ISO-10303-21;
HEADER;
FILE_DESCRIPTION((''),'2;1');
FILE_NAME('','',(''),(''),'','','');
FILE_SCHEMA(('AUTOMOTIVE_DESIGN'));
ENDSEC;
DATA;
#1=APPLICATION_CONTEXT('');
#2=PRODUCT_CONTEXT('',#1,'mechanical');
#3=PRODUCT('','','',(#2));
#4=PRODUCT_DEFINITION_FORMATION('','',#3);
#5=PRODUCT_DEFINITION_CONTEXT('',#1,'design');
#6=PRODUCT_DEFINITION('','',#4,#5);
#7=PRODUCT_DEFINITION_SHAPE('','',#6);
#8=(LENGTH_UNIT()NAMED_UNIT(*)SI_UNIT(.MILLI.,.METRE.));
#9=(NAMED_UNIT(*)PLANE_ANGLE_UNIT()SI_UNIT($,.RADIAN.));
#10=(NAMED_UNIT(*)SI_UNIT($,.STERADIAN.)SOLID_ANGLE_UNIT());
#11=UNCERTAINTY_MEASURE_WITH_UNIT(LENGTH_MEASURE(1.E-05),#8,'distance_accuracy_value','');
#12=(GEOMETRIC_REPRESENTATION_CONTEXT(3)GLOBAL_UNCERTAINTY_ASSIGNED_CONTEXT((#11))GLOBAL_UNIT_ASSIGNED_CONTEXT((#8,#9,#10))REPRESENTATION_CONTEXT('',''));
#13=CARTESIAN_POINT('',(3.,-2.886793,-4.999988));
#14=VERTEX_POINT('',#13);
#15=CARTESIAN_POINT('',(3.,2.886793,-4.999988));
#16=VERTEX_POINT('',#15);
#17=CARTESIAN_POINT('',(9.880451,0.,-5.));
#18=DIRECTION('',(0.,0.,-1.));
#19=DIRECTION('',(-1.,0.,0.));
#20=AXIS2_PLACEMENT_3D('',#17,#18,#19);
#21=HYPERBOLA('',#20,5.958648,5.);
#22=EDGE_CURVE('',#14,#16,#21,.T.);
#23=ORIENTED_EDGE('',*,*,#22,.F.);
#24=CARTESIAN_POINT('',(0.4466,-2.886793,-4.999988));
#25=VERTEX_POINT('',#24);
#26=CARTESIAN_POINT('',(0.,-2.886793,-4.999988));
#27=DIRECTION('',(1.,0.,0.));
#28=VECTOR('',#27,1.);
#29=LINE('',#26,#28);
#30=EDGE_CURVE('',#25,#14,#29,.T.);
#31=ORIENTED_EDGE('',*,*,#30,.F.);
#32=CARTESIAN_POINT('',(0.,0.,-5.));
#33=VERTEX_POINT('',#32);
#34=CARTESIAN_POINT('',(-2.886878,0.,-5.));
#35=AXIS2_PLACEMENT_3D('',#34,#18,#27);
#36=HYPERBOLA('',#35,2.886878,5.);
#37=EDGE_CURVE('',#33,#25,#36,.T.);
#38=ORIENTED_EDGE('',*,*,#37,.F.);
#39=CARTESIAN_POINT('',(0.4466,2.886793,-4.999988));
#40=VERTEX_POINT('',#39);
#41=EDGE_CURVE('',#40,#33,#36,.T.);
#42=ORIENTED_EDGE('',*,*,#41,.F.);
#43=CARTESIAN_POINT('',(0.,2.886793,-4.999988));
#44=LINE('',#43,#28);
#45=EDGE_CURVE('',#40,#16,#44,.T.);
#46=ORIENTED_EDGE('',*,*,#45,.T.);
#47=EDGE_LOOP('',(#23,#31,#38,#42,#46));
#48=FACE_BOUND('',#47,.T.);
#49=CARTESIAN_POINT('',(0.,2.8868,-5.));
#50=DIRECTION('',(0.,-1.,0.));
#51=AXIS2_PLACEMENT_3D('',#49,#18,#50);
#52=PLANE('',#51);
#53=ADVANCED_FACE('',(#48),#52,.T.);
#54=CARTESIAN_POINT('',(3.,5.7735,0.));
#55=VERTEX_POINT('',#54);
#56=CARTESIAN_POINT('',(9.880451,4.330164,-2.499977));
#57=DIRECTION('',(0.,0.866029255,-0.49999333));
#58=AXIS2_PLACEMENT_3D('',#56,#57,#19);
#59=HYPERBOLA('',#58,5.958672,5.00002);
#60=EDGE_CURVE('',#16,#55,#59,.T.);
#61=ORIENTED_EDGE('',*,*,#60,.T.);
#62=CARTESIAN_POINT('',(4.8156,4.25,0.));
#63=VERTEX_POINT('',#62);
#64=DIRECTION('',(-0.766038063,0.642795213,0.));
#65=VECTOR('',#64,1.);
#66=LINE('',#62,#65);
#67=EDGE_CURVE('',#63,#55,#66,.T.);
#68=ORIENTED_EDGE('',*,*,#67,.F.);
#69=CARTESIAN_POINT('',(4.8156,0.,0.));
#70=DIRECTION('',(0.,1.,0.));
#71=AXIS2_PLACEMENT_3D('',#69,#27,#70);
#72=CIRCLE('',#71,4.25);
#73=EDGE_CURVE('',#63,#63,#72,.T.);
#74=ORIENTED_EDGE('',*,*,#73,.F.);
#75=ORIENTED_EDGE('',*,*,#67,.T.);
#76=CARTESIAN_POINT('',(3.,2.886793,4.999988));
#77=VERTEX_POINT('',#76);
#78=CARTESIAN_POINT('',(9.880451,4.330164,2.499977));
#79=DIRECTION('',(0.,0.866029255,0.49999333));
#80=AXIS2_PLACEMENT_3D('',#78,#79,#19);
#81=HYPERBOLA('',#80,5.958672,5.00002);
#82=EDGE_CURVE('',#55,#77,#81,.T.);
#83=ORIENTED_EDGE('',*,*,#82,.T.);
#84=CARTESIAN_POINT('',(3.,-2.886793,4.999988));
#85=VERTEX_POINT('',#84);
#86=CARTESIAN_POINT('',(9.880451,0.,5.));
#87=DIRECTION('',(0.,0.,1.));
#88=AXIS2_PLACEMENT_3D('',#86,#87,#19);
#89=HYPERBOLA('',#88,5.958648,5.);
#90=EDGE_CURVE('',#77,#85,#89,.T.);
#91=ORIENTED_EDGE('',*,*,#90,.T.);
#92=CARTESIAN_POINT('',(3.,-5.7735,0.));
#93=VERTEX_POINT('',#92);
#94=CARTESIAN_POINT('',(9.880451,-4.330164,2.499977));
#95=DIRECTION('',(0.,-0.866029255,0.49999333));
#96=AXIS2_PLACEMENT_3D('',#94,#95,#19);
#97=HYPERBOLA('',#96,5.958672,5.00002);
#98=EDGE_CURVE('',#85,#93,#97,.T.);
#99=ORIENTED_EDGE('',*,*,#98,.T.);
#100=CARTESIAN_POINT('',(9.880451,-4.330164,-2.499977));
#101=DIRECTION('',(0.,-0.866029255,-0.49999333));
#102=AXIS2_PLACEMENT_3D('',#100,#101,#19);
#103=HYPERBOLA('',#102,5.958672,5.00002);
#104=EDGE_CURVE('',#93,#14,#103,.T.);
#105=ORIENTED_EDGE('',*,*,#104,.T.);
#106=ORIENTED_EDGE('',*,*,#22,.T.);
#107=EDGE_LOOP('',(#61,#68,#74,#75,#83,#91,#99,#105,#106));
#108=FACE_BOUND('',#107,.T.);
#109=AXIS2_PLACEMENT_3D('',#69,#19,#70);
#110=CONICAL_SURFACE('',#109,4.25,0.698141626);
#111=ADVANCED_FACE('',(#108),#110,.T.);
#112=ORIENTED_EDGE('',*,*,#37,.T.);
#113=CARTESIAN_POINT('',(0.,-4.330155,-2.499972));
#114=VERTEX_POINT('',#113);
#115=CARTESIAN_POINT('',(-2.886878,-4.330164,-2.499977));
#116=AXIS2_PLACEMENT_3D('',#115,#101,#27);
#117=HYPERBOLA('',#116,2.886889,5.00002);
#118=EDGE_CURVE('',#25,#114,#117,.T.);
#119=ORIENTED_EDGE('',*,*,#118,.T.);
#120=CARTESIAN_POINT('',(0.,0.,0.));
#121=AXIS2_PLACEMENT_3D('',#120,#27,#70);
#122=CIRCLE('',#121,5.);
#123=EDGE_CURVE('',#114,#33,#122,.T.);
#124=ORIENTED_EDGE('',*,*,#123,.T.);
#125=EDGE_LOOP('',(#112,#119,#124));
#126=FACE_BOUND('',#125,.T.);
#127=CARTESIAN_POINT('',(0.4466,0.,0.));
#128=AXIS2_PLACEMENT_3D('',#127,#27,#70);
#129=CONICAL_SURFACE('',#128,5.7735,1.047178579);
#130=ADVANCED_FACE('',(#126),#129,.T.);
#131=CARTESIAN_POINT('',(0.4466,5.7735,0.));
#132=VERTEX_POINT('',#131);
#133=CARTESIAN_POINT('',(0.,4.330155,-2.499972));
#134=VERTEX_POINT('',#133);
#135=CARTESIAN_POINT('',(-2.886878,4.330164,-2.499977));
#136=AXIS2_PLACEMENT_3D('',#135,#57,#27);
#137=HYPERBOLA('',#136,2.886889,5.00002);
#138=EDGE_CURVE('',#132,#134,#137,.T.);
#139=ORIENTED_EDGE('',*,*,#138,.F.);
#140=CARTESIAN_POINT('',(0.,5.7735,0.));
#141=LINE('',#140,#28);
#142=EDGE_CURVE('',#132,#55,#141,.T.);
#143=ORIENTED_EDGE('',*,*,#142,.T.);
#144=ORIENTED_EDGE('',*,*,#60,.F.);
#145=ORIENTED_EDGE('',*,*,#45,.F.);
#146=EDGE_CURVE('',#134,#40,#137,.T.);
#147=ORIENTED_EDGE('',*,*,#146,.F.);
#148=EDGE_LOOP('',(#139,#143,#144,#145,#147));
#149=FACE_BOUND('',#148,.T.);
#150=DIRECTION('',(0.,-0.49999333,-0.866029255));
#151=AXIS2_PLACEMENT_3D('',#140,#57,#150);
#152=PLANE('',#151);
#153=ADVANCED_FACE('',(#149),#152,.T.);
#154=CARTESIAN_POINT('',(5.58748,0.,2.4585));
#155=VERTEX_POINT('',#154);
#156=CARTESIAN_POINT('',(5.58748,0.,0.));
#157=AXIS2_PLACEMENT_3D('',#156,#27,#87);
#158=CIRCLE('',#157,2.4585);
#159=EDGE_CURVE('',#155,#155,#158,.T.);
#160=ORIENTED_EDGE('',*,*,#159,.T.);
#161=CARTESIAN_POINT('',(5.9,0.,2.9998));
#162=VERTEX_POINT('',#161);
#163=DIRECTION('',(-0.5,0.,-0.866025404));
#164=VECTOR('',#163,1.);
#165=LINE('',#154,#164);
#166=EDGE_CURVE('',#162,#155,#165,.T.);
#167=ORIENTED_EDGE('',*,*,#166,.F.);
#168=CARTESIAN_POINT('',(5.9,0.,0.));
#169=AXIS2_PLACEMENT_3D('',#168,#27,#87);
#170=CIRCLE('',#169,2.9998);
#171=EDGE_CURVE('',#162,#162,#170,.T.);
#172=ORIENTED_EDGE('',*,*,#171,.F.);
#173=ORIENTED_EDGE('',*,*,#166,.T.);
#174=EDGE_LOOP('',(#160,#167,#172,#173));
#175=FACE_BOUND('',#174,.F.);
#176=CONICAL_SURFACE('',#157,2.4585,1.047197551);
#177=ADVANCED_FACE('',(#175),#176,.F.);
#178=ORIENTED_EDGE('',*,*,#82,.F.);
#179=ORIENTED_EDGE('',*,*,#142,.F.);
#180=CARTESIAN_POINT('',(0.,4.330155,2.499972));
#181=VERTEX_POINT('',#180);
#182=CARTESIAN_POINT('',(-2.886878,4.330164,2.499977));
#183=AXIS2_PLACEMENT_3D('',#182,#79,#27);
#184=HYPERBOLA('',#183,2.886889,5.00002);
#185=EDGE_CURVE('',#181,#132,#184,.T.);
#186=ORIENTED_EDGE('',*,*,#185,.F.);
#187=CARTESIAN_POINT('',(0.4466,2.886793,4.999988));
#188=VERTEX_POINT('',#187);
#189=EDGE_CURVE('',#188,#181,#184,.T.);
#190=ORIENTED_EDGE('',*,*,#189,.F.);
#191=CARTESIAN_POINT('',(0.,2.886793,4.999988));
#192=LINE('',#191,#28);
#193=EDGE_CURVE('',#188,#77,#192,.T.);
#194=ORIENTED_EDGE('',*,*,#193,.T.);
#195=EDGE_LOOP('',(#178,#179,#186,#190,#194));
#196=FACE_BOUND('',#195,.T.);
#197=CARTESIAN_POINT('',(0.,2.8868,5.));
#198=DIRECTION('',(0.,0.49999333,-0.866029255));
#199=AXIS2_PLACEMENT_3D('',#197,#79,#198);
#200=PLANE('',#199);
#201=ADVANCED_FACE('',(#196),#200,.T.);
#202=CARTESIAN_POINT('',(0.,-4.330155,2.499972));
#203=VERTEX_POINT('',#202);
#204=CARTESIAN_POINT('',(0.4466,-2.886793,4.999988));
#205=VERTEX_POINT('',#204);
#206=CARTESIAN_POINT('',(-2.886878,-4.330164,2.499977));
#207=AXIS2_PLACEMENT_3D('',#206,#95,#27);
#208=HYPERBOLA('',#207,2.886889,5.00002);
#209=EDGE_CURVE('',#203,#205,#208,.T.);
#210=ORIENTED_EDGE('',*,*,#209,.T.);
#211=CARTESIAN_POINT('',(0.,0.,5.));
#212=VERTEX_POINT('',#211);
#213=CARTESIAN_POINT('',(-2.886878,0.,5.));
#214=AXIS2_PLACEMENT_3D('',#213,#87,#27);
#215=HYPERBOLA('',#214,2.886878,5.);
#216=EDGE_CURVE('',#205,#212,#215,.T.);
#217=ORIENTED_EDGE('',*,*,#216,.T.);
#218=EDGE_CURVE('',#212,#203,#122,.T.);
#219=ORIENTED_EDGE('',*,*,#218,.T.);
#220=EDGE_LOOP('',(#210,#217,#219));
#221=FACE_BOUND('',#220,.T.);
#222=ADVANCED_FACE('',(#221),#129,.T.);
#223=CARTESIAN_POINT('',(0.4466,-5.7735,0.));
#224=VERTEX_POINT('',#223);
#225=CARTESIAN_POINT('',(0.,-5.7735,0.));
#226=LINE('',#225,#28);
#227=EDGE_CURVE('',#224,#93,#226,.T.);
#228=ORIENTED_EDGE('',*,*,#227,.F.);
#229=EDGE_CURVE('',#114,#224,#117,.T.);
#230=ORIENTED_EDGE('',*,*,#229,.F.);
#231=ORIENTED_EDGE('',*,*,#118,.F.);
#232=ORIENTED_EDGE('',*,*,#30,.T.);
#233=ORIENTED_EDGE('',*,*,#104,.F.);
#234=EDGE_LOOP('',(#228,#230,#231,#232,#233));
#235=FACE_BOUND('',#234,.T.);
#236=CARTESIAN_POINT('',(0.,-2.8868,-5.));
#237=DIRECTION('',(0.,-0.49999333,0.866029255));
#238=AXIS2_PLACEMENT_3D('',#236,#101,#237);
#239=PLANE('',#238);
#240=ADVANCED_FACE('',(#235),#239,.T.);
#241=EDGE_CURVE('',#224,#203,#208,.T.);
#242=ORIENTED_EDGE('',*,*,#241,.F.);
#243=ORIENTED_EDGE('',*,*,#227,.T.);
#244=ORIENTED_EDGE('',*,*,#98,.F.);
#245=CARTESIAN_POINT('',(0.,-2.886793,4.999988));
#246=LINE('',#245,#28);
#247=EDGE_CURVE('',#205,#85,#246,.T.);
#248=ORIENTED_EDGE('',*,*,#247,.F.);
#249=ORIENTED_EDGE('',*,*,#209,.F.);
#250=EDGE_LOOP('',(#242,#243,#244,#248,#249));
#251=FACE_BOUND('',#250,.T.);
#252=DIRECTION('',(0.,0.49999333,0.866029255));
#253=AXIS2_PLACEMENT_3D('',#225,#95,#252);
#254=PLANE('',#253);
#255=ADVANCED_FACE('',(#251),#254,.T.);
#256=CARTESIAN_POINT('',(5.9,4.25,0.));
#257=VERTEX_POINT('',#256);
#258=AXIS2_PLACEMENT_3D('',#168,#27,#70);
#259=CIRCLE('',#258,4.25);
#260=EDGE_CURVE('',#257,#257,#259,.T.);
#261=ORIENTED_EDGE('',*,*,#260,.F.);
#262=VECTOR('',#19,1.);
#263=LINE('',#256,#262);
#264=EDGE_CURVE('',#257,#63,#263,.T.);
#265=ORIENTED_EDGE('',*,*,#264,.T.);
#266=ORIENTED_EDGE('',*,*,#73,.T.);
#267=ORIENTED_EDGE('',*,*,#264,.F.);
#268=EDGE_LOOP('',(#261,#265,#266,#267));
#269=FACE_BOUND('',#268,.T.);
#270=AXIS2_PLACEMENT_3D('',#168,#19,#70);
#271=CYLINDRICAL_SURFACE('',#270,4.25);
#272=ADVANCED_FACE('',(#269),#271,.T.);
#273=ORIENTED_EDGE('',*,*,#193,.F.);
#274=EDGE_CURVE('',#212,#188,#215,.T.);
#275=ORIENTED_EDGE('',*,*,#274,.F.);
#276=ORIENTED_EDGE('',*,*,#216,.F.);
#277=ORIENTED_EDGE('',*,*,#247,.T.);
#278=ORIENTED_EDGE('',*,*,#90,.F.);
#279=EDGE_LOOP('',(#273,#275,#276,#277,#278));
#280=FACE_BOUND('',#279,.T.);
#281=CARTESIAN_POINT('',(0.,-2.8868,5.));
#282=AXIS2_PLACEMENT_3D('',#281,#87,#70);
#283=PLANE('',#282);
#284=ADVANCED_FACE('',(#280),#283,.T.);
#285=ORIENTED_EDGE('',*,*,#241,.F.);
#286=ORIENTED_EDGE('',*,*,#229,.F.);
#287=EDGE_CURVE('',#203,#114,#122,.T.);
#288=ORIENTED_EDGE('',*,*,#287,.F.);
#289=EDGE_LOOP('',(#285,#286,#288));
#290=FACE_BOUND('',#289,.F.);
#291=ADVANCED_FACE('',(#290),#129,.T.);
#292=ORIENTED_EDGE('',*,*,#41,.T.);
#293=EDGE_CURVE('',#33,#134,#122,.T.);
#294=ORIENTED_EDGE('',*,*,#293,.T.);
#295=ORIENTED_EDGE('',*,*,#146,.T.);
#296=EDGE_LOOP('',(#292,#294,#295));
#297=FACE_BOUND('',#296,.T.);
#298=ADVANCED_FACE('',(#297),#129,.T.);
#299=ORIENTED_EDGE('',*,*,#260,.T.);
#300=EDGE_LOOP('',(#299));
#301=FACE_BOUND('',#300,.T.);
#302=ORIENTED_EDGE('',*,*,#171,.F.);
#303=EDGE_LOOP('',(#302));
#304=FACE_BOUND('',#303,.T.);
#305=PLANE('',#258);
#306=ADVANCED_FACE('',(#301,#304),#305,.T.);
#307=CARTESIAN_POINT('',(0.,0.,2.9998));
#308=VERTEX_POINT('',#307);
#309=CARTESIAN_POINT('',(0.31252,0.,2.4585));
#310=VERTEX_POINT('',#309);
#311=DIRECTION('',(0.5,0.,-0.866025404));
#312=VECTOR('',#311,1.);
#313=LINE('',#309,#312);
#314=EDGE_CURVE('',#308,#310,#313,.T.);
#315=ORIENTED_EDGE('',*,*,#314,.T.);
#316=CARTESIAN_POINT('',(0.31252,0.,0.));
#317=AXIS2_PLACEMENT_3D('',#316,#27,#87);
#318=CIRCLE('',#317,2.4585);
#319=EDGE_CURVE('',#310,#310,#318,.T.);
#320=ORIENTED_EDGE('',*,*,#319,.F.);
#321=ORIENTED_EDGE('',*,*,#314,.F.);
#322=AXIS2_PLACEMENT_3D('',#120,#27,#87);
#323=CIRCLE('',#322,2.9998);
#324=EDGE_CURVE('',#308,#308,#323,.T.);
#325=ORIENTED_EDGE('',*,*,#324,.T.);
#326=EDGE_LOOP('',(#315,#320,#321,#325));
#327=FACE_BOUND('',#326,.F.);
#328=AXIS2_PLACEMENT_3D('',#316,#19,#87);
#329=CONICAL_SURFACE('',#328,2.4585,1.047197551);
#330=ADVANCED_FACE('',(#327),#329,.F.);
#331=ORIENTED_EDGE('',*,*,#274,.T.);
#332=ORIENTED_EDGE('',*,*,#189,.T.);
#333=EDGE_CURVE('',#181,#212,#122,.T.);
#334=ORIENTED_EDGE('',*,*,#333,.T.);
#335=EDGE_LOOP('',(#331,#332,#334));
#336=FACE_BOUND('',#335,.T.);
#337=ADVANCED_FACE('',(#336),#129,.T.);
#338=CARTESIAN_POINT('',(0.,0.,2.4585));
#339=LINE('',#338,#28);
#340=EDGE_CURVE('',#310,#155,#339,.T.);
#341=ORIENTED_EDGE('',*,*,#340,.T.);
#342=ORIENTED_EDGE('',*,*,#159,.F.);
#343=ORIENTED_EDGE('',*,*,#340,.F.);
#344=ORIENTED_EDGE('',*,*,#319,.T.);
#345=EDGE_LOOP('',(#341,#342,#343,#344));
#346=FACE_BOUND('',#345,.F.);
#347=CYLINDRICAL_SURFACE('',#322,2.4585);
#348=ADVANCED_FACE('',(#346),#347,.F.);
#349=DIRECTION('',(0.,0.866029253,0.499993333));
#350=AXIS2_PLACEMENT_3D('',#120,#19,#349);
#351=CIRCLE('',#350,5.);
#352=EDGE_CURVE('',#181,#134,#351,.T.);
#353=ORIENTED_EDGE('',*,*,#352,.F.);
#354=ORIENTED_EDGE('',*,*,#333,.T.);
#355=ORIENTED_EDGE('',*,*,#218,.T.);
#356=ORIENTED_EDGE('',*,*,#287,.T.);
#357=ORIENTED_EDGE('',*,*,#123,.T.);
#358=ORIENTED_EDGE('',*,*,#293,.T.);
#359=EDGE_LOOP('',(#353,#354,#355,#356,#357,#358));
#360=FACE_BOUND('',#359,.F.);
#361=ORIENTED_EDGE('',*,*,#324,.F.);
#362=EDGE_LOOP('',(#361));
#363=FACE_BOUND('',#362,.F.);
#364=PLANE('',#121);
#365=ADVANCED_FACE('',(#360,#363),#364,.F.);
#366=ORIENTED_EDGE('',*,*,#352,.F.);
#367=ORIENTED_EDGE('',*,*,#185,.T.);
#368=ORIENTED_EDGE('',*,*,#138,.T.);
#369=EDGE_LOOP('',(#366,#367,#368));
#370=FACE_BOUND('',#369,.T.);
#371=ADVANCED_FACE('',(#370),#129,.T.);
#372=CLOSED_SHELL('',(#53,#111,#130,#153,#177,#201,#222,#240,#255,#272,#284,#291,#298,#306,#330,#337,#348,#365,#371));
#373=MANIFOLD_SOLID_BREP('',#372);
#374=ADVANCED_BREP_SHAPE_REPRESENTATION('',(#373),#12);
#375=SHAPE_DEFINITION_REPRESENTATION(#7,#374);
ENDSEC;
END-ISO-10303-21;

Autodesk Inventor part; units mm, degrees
ref_plane "YZ Plane" through (0, 0, 0) normal (1, 0, 0) x (0, 1, 0)
ref_plane "XZ Plane" through (0, 0, 0) normal (0, 1, 0) x (-1, 0, 0)
sketch "Sketch1" plane through (0, 0, 0) normal (1, 0, 0) x (0, 1, 0)
  line L0 (-5.7735, 0) -> (-2.8868, 5)
  line L1 (-2.8868, 5) -> (2.8868, 5)
  line L2 (2.8868, 5) -> (5.7735, 0)
  line L3 (5.7735, 0) -> (2.8868, -5)
  line L4 (2.8868, -5) -> (-2.8868, -5)
  line L5 (-2.8868, -5) -> (-5.7735, 0)
  point P0 (0, 0)
  point P1 (0, 0)
  dimension "d0" = 11.547
extrude "Body" add sketch "Sketch1" along normal blind 5.9
sketch "Sketch2" plane through (0, 0, 0) normal (-1, 0, 0) x (0, 0, 1)
  line L0 (0, -8.0829) -> (0, 8.0829) projected
  line L1 (-7, 0) -> (7, 0) projected
  point P0 (0, 0)
hole "Thread" at (0, 0, 0) direction (1, 0, 0) diameter 4.917 end through all thread size "M6x1" class "6H" standard "ANSI Metric M Profile"
chamfer "Chamfer1" distance 0.5413 angle 30 1 edges at (0, 0, -2.4585) measured on face at (0, -3.5612, -2.1322)
chamfer "Chamfer2" distance 0.5413 angle 30 1 edges at (5.9, 0, -2.4585) measured on face at (5.9, -3.5612, -2.1322)
sketch "Sketch3" plane through (0, 0, 0) normal (0, 0, 1) x (1, 0, 0)
  line L0 (0, 2.8868) -> (0, 5.7735) projected
  line L1 (0, 5.7735) -> (5.9, 5.7735) projected
  line L2 (5.9, 2.8868) -> (5.9, 5.7735) projected
  line L3 (-1.18, 0) -> (7.08, 0) projected
  line L4 (0.4466, 5.7735) -> (0, 5)
  line L5 (5.9, 4.25) -> (4.8156, 4.25)
  line L6 (4.8156, 4.25) -> (3, 5.7735)
  dimension "d3" = 30
  dimension "d5" = 10
  dimension "d6" = 8.5
  dimension "d8" = 50
  dimension "d9" = 3
revolve "Chamfer3" cut sketch "Sketch3" angle 360 about axis through (-10, 0, 0) along (1, 0, 0)
ref_plane "Work Plane1" through (16.3751, 0, 0) normal (0, 0, 1) x (-1, 0, 0)
equation "\"d0\" = 1.1547 * SW"
equation "\"d1\" = KOH"
equation "\"d3\" = ANG1"
equation "\"d5\" = SW0"
equation "\"d6\" = SW1"
equation "\"d8\" = ANG2"
equation "\"d9\" = KOH1"
equation "\"d10\" = -0.5 * GD1 + 0.5 * NND"
equation "\"d39\" = -0.5 * GD1 + 0.5 * NND"
equation "\"d12\" = -0.5 * GD1 + 0.5 * NND"
equation "\"d40\" = -0.5 * GD1 + 0.5 * NND"
equation "\"ANG1\" = 30deg"
equation "\"ANG2\" = 50deg"
equation "\"NND\" = 6"
equation "\"KOH\" = 5.9"
equation "\"SW0\" = SW"
equation "\"SW1\" = 0.85 * SW"
equation "\"KOH1\" = 3"
equation "\"GUL\" = 0.541266 * PTC"
equation "\"THREADDIA\" = 6"
equation "\"TOA\" = 30deg"
equation "\"PTC\" = 1"
equation "\"E0\" = 1.155 * SW"
equation "\"GAL\" = 0.541266 * PTC"
equation "\"SW\" = 10"
equation "\"GD1\" = 4.917468"
properties part number "ANSI B18.16.3M - Property Class 5 and 10 - Metric M6 x 1 Metal Type" material "Steel, Mild"
